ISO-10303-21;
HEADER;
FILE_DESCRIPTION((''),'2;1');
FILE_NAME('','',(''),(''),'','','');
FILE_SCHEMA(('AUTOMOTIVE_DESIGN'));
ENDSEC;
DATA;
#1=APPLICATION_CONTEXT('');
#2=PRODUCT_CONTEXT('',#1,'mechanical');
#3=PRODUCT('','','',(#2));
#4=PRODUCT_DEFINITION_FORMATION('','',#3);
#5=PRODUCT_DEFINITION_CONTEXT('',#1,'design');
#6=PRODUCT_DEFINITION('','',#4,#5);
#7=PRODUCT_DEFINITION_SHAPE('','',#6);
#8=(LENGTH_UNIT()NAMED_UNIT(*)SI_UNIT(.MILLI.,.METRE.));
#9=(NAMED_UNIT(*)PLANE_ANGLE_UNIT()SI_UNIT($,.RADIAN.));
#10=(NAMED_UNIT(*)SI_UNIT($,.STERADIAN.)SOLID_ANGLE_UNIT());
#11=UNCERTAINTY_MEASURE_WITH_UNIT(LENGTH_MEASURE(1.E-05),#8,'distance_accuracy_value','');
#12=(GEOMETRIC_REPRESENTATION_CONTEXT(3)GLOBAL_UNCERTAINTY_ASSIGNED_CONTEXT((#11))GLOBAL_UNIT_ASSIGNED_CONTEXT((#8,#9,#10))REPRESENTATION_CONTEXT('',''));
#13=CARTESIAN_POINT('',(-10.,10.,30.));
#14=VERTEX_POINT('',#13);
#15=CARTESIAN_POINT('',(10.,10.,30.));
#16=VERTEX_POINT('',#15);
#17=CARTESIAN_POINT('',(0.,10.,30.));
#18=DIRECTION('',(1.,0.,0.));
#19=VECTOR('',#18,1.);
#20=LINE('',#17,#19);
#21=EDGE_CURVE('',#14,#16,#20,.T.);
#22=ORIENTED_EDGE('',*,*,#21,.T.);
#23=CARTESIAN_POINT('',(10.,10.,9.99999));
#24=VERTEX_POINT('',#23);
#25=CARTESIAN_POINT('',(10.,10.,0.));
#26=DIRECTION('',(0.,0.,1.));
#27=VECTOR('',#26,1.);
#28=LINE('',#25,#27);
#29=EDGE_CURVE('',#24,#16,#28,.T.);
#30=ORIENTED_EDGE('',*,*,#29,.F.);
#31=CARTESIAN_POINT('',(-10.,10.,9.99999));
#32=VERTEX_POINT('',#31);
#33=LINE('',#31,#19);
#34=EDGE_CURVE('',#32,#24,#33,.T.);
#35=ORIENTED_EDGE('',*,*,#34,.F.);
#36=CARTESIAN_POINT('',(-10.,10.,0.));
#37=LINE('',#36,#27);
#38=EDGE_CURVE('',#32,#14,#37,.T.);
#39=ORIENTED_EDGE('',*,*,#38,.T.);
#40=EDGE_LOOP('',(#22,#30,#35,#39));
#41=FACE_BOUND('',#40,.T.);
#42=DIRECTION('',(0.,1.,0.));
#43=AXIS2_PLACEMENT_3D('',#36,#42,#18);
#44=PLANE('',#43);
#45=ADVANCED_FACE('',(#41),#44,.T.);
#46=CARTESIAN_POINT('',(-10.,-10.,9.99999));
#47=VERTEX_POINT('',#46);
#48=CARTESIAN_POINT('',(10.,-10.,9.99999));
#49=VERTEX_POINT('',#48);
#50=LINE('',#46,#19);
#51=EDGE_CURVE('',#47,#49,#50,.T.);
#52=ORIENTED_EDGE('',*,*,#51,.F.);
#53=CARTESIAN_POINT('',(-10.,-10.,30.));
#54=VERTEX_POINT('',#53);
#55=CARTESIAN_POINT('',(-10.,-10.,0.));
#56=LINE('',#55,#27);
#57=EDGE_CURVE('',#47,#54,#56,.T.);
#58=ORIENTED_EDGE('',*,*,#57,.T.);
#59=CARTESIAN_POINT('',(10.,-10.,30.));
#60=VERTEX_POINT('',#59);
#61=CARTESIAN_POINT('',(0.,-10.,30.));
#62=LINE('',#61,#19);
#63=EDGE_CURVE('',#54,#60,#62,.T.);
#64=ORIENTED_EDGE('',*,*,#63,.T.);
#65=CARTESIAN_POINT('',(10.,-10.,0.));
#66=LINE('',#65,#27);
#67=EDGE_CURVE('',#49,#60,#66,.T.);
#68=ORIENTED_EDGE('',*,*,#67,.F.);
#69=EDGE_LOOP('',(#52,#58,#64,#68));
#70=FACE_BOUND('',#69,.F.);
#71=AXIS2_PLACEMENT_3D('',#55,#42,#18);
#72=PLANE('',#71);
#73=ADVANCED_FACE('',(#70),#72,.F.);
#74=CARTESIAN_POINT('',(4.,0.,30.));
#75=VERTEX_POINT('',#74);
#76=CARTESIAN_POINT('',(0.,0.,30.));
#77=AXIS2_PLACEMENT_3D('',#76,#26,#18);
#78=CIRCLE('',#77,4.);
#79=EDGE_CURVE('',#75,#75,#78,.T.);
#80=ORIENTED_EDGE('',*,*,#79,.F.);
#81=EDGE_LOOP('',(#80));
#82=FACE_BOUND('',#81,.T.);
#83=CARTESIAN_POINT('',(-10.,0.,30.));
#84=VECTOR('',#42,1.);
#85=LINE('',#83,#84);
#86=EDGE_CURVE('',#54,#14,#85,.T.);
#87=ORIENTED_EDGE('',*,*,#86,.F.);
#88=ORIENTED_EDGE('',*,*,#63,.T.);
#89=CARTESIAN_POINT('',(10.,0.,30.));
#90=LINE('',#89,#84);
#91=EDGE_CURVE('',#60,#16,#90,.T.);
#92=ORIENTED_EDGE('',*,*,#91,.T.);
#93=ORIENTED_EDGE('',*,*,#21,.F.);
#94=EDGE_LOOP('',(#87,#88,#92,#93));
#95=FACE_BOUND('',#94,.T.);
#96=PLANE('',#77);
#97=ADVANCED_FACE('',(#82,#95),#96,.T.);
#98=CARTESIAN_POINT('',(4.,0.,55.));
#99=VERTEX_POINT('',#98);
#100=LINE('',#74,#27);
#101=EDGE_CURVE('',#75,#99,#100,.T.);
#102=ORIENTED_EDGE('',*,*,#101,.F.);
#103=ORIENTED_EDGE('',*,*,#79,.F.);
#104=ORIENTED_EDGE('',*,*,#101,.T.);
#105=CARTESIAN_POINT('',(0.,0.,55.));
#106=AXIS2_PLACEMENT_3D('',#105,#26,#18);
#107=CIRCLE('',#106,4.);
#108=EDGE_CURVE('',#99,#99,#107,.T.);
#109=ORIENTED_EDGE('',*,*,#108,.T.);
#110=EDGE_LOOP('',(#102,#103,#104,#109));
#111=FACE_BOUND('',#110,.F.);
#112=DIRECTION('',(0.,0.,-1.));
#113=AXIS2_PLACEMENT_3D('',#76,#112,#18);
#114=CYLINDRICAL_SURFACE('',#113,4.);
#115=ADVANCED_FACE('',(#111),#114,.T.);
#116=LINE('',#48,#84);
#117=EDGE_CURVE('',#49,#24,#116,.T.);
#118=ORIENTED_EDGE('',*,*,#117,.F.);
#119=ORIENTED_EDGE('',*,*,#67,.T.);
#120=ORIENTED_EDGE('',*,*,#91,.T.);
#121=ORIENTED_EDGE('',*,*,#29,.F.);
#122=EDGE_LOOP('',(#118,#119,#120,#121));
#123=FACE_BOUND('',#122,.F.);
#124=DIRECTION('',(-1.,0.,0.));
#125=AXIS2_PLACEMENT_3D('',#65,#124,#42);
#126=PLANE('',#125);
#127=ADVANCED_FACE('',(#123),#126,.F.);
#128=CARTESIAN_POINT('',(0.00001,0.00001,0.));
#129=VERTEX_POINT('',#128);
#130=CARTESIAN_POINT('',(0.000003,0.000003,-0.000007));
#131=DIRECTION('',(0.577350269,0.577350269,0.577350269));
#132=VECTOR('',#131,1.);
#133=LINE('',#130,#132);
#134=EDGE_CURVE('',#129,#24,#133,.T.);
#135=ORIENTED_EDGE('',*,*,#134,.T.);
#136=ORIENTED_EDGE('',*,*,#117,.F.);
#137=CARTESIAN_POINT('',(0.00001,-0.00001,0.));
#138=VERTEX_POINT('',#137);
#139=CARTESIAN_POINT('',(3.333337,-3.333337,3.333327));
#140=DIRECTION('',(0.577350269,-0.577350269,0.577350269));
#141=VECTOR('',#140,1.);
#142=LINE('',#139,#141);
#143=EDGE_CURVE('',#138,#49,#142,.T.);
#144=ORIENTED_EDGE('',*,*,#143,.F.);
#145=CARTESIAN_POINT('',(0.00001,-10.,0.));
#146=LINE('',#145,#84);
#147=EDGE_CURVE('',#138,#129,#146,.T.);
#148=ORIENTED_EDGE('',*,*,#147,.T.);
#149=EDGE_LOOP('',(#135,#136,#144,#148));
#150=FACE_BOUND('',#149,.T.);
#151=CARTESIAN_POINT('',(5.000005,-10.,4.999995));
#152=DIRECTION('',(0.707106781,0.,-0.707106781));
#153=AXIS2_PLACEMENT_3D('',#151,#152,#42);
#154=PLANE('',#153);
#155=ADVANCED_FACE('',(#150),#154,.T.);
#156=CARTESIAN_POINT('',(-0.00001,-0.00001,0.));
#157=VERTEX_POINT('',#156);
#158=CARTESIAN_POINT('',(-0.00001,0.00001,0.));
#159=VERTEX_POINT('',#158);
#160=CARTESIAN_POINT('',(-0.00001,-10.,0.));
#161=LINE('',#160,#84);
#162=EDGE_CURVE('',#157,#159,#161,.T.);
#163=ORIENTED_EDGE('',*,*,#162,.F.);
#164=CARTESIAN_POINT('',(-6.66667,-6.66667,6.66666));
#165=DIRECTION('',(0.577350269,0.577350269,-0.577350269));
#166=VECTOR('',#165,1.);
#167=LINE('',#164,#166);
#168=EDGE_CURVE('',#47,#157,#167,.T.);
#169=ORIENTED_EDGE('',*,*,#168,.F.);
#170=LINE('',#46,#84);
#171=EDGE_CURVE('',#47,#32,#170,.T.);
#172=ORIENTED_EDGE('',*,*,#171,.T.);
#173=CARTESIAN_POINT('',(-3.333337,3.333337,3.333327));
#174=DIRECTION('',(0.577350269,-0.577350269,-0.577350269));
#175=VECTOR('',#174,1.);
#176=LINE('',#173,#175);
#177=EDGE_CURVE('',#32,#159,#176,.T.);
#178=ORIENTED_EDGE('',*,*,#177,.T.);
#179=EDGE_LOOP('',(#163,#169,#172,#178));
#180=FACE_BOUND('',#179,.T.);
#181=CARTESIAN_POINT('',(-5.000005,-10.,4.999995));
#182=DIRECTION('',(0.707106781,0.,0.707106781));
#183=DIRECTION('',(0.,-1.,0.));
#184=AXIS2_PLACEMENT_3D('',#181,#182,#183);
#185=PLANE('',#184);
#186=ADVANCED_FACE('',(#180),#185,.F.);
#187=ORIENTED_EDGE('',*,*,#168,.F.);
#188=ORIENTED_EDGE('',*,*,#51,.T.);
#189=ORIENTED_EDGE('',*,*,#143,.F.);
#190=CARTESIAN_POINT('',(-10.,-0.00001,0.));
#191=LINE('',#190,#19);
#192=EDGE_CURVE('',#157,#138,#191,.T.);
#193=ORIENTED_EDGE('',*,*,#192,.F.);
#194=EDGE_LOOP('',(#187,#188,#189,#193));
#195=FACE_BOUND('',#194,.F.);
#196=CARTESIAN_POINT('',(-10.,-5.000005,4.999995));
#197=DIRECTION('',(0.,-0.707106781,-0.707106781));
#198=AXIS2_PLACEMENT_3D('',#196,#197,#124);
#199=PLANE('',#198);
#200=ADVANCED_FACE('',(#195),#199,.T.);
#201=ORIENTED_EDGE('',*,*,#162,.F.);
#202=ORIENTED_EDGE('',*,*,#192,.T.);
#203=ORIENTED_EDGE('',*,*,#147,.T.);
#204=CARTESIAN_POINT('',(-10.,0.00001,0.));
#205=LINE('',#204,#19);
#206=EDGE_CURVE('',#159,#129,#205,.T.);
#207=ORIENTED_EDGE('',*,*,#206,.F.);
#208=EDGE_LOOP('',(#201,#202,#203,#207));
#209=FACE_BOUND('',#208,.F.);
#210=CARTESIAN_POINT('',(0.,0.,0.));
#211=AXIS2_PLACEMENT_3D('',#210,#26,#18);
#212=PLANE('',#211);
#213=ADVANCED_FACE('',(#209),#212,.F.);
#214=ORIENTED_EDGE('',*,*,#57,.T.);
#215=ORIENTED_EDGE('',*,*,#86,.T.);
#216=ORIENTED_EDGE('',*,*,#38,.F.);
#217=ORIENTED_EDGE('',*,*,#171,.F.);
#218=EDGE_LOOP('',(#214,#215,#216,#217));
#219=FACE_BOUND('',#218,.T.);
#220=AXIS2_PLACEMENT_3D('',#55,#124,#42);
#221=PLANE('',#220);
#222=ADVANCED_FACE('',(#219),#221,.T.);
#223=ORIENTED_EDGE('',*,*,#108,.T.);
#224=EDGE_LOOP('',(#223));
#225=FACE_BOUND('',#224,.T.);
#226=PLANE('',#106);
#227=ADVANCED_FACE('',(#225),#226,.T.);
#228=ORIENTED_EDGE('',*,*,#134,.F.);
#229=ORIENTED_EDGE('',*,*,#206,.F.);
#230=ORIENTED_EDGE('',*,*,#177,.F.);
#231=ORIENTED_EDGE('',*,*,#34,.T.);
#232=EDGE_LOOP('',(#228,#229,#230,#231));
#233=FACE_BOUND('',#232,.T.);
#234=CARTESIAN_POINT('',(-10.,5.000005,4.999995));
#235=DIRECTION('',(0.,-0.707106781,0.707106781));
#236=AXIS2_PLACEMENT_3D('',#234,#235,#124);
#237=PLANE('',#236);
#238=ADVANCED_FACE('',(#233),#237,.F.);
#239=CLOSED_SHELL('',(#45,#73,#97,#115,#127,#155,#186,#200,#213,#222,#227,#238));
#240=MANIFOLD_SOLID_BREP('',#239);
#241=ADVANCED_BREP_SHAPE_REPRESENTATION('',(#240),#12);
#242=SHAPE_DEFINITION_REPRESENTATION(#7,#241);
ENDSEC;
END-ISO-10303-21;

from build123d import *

# Parameters (mm, degrees)
F0_W     = 20
F0_H     = 20
F1_DEPTH = 30
F2_R     = 4
F3_DEPTH = 25
F4_SIZE  = 9.99999


# Not quite as in the source:
# - a fillet or chamfer is up to 0.001 mm smaller than in the source, because OpenCascade refuses the exact size


with BuildPart() as f1:
    # F0 (on Top) → F1 (new body)
    with BuildSketch(Plane.XY):
        Rectangle(F0_W, F0_H)
    extrude(amount=F1_DEPTH)

    # F2 (on face) → F3 (join)
    with BuildSketch(Plane.XY.offset(30)):
        Circle(F2_R)
    extrude(amount=F3_DEPTH)

    # F4 (size 10 in the source; OpenCascade refuses exactly that, so slightly less here)
    f4_edges = [f1.edges().sort_by_distance(p)[0] for p in [
        (10, 0, 0),
        (0, 10, 0),
        (-10, 0, 0),
        (0, -10, 0),
    ]]
    chamfer(f4_edges, length=F4_SIZE)


solid = f1.part
